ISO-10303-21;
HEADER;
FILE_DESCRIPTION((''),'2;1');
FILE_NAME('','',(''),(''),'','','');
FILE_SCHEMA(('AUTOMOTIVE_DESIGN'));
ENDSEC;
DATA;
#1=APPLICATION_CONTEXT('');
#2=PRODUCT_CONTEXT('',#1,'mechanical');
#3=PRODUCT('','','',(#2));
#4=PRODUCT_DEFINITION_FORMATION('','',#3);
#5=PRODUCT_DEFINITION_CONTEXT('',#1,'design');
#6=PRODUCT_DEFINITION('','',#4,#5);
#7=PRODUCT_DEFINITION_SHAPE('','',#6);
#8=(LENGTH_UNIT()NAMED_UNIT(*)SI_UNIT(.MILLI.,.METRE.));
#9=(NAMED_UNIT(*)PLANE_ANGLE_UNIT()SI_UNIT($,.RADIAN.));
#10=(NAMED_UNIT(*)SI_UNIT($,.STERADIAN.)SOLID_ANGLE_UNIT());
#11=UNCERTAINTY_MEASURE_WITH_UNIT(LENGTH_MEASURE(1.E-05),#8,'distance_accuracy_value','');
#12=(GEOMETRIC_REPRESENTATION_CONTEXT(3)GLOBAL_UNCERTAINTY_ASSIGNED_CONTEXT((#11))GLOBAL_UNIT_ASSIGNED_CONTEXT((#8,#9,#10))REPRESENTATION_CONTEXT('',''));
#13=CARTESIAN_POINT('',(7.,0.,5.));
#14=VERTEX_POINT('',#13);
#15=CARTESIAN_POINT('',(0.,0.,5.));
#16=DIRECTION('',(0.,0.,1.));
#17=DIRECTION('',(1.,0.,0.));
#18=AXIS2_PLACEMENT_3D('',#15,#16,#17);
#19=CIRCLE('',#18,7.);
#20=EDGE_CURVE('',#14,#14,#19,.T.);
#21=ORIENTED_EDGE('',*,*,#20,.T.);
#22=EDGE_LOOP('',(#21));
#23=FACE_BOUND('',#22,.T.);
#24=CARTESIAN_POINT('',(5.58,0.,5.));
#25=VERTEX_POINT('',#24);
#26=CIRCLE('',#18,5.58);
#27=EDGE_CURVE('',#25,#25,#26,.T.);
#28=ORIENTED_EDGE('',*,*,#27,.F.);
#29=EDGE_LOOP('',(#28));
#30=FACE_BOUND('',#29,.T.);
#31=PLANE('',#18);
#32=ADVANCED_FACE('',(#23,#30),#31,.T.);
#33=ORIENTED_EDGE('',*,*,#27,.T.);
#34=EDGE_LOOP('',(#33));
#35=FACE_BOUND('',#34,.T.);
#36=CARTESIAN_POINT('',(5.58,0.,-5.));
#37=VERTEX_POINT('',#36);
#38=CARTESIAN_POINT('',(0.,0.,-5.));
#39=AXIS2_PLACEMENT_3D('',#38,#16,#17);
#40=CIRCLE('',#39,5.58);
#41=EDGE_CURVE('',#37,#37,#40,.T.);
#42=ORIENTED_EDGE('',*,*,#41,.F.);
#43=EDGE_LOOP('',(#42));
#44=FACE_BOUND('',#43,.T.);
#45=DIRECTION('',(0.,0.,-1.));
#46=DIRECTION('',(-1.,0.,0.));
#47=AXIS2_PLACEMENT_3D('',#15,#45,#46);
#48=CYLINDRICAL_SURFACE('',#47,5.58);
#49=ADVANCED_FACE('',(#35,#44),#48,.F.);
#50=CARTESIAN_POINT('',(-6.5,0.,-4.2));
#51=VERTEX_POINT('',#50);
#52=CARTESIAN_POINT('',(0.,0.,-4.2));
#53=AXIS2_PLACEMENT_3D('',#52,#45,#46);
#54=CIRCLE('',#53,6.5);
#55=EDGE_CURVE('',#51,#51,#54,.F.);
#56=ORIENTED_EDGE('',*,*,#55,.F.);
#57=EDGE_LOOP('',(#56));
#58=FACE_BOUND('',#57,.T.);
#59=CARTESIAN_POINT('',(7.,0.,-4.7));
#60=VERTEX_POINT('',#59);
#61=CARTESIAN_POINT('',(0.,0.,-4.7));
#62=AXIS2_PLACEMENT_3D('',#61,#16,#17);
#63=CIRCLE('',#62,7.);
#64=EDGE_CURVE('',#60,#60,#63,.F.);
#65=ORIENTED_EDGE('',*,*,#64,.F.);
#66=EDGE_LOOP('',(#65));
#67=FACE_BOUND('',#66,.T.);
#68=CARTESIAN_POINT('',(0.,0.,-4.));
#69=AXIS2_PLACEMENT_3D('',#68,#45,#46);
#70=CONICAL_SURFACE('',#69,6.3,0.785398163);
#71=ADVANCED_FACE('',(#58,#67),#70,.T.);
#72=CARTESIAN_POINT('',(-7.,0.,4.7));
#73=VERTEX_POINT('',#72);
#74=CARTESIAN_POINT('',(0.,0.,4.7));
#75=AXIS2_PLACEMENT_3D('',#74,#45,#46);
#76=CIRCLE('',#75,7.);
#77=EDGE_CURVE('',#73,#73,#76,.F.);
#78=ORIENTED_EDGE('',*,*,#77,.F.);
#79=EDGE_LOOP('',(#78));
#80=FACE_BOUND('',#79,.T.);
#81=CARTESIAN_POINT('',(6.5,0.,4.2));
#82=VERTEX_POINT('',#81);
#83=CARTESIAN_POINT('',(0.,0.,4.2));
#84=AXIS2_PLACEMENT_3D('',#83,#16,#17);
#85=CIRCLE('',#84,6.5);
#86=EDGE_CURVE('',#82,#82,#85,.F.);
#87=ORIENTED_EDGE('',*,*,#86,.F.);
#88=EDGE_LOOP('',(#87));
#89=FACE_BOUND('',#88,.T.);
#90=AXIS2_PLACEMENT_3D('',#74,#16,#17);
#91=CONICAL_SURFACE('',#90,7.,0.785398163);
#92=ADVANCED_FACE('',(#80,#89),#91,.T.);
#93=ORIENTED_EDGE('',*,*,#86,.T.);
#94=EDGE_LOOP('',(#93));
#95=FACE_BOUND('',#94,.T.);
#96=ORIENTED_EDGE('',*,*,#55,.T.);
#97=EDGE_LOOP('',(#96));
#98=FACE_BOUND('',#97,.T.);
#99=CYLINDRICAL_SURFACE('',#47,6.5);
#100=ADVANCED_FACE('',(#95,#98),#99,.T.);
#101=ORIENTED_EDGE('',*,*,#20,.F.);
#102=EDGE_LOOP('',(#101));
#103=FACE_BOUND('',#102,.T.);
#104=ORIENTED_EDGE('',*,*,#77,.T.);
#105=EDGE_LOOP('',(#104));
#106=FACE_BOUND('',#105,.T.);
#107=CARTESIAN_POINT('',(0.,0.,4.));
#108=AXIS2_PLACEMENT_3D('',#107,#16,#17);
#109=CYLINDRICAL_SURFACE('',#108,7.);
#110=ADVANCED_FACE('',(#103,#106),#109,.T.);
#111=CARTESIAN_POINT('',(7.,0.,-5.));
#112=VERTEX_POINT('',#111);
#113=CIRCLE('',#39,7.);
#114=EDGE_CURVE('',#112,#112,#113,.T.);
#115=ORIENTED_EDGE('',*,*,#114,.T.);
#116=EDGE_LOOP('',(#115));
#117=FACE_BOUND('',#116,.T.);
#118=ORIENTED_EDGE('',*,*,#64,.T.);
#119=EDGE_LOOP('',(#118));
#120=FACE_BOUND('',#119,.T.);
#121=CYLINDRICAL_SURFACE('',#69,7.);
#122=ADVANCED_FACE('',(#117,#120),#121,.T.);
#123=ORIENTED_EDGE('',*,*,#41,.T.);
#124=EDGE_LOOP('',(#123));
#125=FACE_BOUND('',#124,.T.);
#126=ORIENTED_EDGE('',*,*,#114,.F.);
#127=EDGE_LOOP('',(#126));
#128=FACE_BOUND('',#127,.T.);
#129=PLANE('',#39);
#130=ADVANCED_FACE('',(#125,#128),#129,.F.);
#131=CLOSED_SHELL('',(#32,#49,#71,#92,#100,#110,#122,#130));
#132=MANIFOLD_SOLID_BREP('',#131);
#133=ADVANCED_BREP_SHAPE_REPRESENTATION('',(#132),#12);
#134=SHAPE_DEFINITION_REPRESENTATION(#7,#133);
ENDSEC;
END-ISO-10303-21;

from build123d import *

# Parameters (mm, degrees)
SKETCH1_R           = 6.5
SKETCH1_R_2         = 5.58
BOSS_EXTRUDE1_DEPTH = 5
BOSS_EXTRUDE2_START = 1
SKETCH2_R           = 7
SKETCH2_R_2         = 6.5
BOSS_EXTRUDE2_DEPTH = 1
CHAMFER1_SIZE       = 0.7


with BuildPart() as part:
    # Sketch1 → Boss-Extrude1 (new, symmetric)
    with BuildSketch(Plane.XY):
        Circle(SKETCH1_R)
        Circle(SKETCH1_R_2, mode=Mode.SUBTRACT)
    extrude(amount=BOSS_EXTRUDE1_DEPTH, both=True)

    # Sketch2 → Boss-Extrude2 (add)
    with BuildSketch(Plane.XY.offset(-5).offset(BOSS_EXTRUDE2_START)):
        Circle(SKETCH2_R)
        Circle(SKETCH2_R_2, mode=Mode.SUBTRACT)
    boss_extrude2 = extrude(amount=-BOSS_EXTRUDE2_DEPTH)

    # Mirror1: Boss-Extrude2 across plane
    add(boss_extrude2.mirror(Plane.XY))

    # Chamfer1
    # the kernel refuses this chamfer: 0.7 mm, written as the material it takes off along each edge
    with BuildSketch(Plane(origin=(0, 0, 4), x_dir=(1, 0, 0), z_dir=(0, -1, 0))) as chamfer1_piece_1_section:
        Polygon((7 - CHAMFER1_SIZE, 0), (7, CHAMFER1_SIZE), (7, 0), align=None)
    chamfer1_piece_1 = revolve(axis=Axis((0, 0, 4), (0, 0, 1)), mode=Mode.PRIVATE)
    chamfer1_piece_1 = chamfer1_piece_1 - Plane(origin=(0, 0, 4.444446297), x_dir=(1, 0, 0), z_dir=(0, 0, 1)) * Cylinder(6.5, 29, mode=Mode.PRIVATE)
    add(chamfer1_piece_1, mode=Mode.SUBTRACT)
    with BuildSketch(Plane(origin=(0, 0, -4), x_dir=(1, 0, 0), z_dir=(0, -1, 0))) as chamfer1_piece_2_section:
        Polygon((7 - CHAMFER1_SIZE, 0), (7, -CHAMFER1_SIZE), (7, 0), align=None)
    chamfer1_piece_2 = revolve(axis=Axis((0, 0, -4), (0, 0, 1)), mode=Mode.PRIVATE)
    chamfer1_piece_2 = chamfer1_piece_2 - Plane(origin=(0, 0, -4.444446297), x_dir=(1, 0, 0), z_dir=(0, 0, 1)) * Cylinder(6.5, 29, mode=Mode.PRIVATE)
    add(chamfer1_piece_2, mode=Mode.SUBTRACT)


solid = part.part
